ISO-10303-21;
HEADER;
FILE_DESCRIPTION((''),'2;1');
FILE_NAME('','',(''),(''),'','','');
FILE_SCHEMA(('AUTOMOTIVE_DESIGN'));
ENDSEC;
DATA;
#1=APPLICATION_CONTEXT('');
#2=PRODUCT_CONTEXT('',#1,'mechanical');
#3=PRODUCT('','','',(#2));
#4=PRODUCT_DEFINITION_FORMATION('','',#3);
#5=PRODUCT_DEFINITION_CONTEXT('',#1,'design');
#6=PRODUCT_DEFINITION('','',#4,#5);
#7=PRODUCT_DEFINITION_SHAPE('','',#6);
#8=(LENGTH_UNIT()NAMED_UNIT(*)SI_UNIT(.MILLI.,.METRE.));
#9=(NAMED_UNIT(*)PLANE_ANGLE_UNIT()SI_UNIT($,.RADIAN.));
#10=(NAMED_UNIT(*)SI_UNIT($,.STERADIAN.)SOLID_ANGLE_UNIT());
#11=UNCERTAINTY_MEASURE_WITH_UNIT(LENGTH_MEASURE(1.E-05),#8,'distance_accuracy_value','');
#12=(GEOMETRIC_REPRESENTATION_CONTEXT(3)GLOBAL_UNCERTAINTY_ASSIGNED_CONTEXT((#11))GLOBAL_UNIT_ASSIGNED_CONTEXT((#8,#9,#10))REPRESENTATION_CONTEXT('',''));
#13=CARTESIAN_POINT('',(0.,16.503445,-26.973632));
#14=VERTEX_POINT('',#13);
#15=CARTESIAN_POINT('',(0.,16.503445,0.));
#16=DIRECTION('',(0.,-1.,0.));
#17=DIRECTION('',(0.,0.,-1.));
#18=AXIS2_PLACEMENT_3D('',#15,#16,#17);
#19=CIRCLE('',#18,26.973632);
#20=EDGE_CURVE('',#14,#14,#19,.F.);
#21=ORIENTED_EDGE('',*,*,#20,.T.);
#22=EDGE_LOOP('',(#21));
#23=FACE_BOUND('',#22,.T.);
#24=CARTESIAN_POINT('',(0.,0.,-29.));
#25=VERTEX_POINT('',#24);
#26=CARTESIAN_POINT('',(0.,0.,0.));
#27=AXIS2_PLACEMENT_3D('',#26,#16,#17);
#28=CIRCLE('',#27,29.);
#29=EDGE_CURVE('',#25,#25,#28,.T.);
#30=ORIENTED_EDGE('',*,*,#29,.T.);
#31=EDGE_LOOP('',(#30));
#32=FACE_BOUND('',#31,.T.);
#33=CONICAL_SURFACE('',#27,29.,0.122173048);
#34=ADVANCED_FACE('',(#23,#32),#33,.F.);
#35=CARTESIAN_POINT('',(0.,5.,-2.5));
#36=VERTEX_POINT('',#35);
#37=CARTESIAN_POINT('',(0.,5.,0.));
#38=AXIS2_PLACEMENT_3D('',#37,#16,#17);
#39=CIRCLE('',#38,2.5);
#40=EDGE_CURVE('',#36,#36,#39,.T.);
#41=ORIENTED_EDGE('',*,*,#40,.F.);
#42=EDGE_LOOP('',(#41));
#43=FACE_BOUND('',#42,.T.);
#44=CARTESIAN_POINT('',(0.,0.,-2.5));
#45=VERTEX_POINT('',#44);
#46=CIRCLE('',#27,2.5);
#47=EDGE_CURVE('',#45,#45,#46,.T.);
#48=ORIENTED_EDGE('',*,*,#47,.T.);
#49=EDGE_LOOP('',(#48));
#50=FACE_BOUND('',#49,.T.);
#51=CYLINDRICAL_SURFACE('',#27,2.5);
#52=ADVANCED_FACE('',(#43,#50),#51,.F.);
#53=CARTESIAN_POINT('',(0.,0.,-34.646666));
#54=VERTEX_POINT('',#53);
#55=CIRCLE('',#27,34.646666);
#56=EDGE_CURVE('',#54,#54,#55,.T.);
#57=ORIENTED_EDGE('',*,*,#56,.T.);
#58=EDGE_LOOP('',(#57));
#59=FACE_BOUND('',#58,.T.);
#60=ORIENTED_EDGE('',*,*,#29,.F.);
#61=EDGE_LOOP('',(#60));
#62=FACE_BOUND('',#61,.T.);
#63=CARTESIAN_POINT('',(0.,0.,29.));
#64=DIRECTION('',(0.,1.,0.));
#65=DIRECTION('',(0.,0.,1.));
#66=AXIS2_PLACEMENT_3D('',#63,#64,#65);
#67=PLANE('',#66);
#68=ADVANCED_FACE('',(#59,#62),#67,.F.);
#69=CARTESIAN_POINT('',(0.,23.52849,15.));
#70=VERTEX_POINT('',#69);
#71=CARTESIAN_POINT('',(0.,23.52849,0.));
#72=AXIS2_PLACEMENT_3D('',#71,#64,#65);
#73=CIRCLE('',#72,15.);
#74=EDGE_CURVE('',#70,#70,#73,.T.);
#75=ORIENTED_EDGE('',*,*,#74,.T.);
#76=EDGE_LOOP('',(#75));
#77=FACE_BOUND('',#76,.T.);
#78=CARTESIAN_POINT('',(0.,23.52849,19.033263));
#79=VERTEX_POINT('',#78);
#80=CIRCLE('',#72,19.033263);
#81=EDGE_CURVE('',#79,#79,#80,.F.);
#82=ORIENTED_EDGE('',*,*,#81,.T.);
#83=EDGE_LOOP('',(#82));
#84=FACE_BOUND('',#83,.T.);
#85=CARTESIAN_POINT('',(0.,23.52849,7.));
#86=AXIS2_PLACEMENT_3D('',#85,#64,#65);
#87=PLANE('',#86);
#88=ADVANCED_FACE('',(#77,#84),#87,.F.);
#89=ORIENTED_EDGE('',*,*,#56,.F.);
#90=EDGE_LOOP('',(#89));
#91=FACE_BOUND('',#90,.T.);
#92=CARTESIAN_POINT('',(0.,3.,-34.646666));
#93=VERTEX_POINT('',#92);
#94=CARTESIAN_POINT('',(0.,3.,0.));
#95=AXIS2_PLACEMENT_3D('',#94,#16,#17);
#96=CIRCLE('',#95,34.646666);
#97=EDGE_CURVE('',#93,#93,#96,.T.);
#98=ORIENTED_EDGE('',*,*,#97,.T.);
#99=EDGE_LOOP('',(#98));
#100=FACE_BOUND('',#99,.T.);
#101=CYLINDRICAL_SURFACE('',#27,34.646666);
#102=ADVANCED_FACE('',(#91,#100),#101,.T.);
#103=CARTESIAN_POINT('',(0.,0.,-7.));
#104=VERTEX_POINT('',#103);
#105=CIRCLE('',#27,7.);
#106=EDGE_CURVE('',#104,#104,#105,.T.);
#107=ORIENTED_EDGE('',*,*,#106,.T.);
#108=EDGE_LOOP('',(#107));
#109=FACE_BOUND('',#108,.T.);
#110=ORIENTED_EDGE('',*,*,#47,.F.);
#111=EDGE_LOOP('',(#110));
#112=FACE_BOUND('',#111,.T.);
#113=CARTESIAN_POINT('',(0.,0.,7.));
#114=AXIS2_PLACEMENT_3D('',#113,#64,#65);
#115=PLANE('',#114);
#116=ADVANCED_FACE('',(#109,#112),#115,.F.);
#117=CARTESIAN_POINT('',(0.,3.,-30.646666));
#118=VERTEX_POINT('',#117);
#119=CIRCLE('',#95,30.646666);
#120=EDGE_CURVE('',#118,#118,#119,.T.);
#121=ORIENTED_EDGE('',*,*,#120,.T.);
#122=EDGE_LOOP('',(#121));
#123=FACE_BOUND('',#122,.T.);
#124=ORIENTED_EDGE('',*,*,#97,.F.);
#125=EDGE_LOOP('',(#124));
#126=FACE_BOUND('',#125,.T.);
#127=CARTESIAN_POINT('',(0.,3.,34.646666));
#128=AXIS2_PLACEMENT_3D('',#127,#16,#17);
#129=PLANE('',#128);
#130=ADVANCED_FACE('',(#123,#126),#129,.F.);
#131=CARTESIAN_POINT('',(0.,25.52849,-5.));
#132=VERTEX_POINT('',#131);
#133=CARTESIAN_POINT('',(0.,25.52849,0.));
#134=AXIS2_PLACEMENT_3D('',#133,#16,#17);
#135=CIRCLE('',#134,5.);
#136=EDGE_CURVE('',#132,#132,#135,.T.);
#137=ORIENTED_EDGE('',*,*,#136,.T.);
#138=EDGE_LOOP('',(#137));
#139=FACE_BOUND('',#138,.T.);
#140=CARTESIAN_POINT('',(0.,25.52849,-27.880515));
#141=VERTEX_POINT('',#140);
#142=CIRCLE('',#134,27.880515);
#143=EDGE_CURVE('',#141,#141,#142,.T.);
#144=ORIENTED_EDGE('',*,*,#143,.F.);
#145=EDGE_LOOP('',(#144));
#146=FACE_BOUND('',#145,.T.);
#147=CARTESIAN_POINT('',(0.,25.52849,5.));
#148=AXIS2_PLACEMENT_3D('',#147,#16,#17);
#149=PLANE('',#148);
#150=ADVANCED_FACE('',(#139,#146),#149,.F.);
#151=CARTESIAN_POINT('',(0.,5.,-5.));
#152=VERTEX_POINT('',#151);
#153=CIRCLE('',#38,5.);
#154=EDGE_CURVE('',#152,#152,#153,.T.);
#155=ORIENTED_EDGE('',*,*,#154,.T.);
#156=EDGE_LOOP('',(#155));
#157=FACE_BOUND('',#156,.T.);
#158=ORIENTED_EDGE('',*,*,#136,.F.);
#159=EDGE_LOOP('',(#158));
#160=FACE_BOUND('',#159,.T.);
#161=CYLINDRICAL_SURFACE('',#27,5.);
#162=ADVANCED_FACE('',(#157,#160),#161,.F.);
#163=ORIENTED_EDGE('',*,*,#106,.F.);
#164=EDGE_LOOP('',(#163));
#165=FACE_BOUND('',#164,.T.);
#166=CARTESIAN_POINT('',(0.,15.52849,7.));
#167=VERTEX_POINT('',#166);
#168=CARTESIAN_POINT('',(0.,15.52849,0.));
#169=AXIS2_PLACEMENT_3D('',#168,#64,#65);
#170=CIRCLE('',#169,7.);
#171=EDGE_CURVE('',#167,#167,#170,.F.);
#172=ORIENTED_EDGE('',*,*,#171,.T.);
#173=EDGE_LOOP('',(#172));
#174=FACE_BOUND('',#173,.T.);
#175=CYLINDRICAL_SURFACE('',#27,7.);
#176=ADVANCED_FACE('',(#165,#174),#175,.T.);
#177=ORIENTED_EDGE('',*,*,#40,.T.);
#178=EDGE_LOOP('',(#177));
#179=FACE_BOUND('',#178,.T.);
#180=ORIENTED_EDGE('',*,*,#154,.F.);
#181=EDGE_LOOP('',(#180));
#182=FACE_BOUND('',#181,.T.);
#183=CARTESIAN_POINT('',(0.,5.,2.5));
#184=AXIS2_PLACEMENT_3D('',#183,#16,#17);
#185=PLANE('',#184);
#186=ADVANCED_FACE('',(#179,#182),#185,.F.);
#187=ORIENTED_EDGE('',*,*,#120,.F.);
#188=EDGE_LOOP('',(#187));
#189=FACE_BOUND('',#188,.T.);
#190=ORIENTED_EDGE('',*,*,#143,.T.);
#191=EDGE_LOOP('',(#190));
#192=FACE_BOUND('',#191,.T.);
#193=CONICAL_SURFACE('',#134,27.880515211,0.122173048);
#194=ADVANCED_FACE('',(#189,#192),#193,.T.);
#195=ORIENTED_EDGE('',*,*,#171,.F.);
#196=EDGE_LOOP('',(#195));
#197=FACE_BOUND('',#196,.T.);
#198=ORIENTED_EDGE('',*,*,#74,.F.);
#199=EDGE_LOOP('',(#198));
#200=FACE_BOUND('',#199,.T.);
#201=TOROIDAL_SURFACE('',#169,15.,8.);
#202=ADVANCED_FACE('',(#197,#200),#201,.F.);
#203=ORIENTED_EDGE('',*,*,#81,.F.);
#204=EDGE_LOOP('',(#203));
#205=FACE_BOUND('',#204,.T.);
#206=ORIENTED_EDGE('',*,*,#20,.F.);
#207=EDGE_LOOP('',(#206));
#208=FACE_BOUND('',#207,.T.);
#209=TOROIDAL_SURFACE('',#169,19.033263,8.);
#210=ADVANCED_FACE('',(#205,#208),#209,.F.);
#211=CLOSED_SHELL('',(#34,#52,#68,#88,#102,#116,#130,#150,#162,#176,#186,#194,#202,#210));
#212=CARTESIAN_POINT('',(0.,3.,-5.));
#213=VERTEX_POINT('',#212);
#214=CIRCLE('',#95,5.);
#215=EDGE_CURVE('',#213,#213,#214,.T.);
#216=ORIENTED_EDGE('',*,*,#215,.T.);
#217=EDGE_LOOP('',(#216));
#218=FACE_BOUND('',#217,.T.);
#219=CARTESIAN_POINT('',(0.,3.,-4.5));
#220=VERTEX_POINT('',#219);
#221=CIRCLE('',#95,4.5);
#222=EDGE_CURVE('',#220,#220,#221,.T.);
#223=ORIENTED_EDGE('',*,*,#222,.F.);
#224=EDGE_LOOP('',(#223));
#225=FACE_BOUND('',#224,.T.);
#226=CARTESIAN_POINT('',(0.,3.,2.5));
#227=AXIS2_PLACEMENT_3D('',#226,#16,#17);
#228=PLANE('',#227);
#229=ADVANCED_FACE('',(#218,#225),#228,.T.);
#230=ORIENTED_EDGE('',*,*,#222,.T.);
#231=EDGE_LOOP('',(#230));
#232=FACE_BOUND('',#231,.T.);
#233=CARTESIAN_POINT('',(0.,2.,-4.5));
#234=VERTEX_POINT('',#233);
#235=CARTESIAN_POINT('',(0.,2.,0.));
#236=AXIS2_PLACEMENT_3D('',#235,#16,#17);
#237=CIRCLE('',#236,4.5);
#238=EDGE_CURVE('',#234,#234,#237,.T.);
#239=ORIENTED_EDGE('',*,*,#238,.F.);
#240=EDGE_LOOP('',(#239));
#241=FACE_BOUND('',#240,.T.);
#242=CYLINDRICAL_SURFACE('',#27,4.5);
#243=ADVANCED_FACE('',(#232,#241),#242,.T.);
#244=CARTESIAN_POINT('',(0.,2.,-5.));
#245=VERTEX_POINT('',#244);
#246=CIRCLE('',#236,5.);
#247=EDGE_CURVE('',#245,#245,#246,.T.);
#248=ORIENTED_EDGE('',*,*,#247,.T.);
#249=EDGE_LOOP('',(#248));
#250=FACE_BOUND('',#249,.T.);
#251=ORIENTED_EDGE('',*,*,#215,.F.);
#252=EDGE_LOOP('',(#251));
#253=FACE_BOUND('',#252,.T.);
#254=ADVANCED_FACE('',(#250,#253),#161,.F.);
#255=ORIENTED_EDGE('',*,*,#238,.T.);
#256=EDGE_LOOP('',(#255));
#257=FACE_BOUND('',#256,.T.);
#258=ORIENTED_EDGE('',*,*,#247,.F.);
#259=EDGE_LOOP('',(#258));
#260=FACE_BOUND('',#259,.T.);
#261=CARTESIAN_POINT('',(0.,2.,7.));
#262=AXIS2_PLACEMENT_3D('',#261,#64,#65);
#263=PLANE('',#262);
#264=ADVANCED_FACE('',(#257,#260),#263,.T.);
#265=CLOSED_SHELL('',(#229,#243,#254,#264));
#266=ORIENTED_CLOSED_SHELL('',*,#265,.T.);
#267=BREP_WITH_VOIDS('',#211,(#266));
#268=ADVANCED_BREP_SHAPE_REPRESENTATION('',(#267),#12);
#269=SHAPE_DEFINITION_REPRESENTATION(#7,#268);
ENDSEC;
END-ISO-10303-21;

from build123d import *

# Parameters (mm, degrees)
R_VOL_MINCE1_OUTLINE_W = 0.5
R_VOL_MINCE1_OUTLINE_H = 1
CONG_2_R               = 8
CONG_3_R               = 8


# Read off the part's stored shape, not the designer's step: Révol.-Mince1
with BuildPart() as part:
    # Révol.-Mince1 outline → Révol.-Mince1 (revolve)
    with BuildSketch(Plane.XY):
        Polygon((2.5, 5), (2.5, 0), (7, 0), (7, 23.528490035), (26.111064682, 23.528490035), (29, 0), (34.646665968, 0), (34.646665968, 3), (30.646665968, 3), (27.880515211, 25.528490035), (5, 25.528490035), (5, 5), align=None)
        with Locations((4.75, 2.5)):
            Rectangle(R_VOL_MINCE1_OUTLINE_W, R_VOL_MINCE1_OUTLINE_H, mode=Mode.SUBTRACT)
    revolve(axis=Axis((0, 0, 0), (0, 1, 0)))

    # Congé2
    cong_2_edges = [part.edges().sort_by_distance(p)[0] for p in [
        (-26.111064682, 23.528490035, 0),
    ]]
    fillet(cong_2_edges, radius=CONG_2_R)

    # Congé3
    cong_3_edges = [part.edges().sort_by_distance(p)[0] for p in [
        (-7, 23.528490035, 0),
    ]]
    fillet(cong_3_edges, radius=CONG_3_R)


solid = part.part
